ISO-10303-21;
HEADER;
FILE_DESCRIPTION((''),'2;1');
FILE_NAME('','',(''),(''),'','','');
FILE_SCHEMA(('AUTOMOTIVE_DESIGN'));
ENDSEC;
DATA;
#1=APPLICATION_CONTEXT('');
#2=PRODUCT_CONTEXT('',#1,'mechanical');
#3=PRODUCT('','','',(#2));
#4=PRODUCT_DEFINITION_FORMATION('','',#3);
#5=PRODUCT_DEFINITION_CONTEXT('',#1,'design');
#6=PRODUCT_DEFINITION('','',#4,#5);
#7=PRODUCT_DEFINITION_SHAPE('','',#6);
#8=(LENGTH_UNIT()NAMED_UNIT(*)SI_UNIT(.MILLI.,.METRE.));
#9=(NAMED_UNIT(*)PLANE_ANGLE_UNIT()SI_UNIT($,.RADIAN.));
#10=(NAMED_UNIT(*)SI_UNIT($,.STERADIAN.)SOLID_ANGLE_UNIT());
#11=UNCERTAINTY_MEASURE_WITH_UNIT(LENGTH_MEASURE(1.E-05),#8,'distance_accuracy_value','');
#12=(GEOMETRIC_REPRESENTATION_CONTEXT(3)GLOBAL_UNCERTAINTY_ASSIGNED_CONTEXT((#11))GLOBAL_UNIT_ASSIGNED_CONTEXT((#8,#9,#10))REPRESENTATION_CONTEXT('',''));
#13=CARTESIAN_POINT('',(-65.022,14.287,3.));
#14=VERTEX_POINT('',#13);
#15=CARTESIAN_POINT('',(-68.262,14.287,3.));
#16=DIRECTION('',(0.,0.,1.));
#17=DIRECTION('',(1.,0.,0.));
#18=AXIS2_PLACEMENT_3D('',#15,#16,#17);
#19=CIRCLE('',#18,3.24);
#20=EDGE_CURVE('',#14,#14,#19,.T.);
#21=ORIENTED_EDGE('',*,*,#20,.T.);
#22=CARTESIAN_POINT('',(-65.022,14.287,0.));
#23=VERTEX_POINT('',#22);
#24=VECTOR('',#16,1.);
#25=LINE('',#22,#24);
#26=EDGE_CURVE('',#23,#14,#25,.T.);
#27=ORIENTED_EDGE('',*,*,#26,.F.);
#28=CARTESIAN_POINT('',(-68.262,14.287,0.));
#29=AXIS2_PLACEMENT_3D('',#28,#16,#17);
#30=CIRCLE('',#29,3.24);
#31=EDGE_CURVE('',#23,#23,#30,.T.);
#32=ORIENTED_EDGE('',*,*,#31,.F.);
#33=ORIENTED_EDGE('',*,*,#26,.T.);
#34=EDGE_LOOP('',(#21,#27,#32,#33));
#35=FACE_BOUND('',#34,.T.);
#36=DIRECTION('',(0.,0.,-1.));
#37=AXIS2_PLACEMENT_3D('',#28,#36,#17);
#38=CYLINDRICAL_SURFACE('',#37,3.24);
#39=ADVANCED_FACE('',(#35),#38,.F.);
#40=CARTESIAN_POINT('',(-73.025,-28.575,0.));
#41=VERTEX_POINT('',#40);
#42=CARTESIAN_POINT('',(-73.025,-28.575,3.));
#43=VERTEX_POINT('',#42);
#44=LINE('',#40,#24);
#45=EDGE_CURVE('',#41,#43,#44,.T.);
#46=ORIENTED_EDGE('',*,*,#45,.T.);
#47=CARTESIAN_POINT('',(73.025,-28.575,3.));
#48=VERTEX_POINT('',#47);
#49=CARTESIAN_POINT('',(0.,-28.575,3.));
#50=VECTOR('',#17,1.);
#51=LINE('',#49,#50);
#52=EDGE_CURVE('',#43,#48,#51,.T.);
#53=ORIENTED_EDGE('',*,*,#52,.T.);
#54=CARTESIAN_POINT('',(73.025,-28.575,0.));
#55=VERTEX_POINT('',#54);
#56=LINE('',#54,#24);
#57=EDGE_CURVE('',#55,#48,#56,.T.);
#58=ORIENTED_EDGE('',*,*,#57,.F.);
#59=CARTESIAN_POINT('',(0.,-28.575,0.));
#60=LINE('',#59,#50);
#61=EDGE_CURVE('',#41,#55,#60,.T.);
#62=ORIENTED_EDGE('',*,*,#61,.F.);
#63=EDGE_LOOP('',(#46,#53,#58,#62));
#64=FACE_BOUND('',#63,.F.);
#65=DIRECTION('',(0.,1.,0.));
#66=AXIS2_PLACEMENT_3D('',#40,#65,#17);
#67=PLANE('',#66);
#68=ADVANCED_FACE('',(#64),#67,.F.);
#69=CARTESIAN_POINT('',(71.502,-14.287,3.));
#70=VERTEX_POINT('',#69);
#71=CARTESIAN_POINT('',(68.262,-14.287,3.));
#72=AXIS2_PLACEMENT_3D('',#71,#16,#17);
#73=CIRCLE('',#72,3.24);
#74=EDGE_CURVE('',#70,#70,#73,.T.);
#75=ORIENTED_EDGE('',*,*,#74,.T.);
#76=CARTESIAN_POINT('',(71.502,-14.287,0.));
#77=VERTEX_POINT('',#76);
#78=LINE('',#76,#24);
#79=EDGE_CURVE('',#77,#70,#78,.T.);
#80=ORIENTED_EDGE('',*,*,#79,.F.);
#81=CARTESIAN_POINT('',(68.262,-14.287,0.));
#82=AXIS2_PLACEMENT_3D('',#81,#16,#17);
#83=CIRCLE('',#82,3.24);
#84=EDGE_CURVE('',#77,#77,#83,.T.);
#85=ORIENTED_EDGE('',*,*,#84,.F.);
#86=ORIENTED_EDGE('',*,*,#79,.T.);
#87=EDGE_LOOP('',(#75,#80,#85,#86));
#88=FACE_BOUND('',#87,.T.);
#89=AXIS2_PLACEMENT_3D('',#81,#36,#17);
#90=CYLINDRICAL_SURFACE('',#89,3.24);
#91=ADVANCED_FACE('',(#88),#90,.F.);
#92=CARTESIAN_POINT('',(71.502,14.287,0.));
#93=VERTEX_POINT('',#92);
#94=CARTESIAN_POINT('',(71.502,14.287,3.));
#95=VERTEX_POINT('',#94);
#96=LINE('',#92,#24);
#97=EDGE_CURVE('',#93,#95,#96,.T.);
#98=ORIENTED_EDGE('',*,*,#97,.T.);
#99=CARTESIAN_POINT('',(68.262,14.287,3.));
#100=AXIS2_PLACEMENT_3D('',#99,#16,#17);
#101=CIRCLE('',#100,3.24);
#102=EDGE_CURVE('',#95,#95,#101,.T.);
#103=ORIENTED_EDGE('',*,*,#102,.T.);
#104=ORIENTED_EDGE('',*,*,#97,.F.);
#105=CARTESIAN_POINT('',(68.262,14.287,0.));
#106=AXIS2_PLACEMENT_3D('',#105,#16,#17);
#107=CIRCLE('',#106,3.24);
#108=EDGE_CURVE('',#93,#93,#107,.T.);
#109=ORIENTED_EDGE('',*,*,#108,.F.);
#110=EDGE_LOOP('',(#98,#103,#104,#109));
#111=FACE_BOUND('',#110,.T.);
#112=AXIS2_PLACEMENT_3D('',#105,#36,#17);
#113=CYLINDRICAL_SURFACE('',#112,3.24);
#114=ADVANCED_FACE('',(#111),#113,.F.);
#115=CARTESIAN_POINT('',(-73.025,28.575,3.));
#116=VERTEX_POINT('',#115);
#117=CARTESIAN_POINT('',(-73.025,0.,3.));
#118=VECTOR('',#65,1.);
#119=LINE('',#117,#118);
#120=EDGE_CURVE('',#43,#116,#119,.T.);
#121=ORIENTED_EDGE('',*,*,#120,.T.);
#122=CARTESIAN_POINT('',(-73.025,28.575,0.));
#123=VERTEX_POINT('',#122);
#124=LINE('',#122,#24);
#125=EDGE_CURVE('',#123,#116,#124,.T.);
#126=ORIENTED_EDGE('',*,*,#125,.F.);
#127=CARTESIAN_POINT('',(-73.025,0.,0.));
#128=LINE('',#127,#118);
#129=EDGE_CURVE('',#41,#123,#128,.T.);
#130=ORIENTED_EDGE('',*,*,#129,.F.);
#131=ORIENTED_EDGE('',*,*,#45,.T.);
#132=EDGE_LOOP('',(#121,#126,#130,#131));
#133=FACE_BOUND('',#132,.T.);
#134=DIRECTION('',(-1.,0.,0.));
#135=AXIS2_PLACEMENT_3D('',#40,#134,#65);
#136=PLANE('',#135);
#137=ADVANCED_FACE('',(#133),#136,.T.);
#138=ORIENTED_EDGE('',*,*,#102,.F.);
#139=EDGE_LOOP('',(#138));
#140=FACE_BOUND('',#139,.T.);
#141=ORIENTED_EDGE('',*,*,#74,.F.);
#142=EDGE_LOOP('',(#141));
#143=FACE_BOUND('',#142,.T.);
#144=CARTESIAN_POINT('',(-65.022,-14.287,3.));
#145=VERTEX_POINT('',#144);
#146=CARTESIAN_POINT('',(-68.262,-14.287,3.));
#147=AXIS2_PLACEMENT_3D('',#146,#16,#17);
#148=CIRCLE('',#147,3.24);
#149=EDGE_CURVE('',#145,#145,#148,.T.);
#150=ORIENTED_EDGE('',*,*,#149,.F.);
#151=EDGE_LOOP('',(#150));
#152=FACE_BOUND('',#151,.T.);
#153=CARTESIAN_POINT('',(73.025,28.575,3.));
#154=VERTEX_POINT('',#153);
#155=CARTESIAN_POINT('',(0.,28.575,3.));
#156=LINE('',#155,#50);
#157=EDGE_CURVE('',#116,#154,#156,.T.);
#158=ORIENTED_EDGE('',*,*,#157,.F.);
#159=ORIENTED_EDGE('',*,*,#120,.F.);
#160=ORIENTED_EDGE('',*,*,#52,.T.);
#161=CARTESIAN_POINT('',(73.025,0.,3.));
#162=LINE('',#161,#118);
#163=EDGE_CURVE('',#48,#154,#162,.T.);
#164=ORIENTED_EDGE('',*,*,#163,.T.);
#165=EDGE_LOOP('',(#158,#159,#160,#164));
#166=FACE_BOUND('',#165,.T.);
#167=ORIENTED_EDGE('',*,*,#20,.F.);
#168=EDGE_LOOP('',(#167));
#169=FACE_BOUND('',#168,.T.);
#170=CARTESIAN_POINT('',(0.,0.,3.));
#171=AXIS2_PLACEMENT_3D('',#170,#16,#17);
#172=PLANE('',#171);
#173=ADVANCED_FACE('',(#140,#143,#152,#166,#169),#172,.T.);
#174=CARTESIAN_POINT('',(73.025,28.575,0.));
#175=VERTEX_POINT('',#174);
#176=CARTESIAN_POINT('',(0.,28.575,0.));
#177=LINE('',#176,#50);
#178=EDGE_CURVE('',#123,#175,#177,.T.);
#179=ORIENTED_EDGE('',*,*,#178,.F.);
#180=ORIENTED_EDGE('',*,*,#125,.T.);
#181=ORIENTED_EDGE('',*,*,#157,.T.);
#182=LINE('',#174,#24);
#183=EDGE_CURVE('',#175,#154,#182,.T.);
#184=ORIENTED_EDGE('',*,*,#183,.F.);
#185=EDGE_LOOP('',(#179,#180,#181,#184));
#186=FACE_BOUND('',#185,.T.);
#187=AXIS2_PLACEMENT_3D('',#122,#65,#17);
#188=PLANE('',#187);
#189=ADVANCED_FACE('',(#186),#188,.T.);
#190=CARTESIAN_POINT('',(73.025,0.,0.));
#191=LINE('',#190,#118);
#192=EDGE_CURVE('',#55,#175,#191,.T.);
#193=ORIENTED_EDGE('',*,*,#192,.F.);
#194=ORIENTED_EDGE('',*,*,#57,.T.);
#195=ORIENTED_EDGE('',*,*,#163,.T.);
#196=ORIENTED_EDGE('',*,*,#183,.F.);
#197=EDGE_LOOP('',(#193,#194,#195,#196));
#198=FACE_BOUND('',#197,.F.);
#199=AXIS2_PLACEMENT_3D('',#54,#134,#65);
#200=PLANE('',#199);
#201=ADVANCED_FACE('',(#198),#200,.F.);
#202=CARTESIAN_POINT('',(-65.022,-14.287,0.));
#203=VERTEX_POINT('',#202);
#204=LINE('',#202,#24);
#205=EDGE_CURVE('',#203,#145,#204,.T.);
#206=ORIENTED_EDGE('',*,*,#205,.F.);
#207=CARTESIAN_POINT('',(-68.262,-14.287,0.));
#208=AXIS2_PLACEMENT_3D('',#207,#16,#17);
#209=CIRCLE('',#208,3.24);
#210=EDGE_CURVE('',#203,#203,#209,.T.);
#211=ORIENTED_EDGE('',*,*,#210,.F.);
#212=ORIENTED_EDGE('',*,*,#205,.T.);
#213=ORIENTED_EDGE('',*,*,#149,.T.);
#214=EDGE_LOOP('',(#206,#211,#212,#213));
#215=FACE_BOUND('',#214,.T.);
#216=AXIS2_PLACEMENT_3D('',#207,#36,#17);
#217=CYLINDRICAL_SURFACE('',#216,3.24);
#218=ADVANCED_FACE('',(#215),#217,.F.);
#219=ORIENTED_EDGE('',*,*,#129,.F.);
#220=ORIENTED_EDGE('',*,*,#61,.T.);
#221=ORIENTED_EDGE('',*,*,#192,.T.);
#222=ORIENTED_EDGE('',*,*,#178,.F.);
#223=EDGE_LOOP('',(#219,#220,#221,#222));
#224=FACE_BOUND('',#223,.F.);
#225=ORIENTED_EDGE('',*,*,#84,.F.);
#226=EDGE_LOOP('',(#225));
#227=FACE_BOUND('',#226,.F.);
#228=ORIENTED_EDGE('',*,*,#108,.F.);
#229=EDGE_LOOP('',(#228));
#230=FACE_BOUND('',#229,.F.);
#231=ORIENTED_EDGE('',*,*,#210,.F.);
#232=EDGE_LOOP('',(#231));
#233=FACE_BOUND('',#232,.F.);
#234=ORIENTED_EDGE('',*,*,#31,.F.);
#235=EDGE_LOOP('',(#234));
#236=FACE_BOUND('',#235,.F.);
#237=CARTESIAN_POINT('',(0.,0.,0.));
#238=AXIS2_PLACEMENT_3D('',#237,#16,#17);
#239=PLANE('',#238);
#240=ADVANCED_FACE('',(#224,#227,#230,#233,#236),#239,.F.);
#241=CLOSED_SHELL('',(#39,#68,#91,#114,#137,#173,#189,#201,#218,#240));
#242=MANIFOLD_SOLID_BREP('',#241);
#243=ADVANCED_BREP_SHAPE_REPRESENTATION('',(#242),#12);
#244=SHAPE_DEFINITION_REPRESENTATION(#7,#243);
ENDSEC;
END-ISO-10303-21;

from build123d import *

# Parameters (mm, degrees)
F0_W     = 146.05
F0_H     = 57.15
F0_R     = 3.24
F1_DEPTH = 3


# Not quite as in the source:
# - ends of sketch curves that miss each other by under 0.0002 mm in the source are joined


with BuildPart() as f1:
    # F0 (on Top) → F1 (new body)
    with BuildSketch(Plane.XY):
        Rectangle(F0_W, F0_H)
        with Locations((-68.262, -14.287)):
            Circle(F0_R, mode=Mode.SUBTRACT)
        with Locations((68.262, -14.287)):
            Circle(F0_R, mode=Mode.SUBTRACT)
        with Locations((-68.262, 14.287)):
            Circle(F0_R, mode=Mode.SUBTRACT)
        with BuildLine():
            ThreePointArc((-68.262, 7.937), (-61.912, 14.287), (-68.262, 20.637))
            Line((-68.262, 20.637), (-72.225, 20.637))
            Line((-72.225, 20.637), (-72.225, 27.775))
            Line((-72.225, 27.775), (72.225, 27.775))
            Line((72.225, 27.775), (72.225, 20.636958))
            Line((72.225, 20.636958), (69.238962, 20.636958))
            ThreePointArc((69.238962, 20.636958), (62.9120417914, 14.2639619992), (69.2850380008, 7.9370417914))
            Line((69.2850380008, 7.9370417914), (72.225, 7.937042))
            Line((72.225, 7.937042), (72.225, -7.937576))
            Line((72.225, -7.937576), (68.176478, -7.937576))
            ThreePointArc((68.176478, -7.937576), (61.9125759326, -14.3725220009), (68.3475220009, -20.6364240674))
            Line((68.3475220009, -20.6364240674), (72.225, -20.636424))
            Line((72.225, -20.636424), (72.225, -27.775))
            Line((72.225, -27.775), (-72.225, -27.775))
            Line((-72.225, -27.775), (-72.225, -20.636871))
            Line((-72.225, -20.636871), (-69.221508, -20.636871))
            ThreePointArc((-69.221508, -20.636871), (-62.9121291038, -14.2465080007), (-69.3024919993, -7.9371291038))
            Line((-69.3024919993, -7.9371291038), (-72.225, -7.937129))
            Line((-72.225, -7.937129), (-72.225, 7.937))
            Line((-72.225, 7.937), (-68.262, 7.937))
        make_face(mode=Mode.SUBTRACT)
        with Locations((68.262, 14.287)):
            Circle(F0_R, mode=Mode.SUBTRACT)
        with BuildLine():
            Line((-72.225, 20.637), (-68.262, 20.637))
            ThreePointArc((-68.262, 20.637), (-61.912, 14.287), (-68.262, 7.937))
            Line((-68.262, 7.937), (-72.225, 7.937))
            Line((-72.225, 7.937), (-72.225, -7.937129))
            Line((-72.225, -7.937129), (-69.302492, -7.937129))
            ThreePointArc((-69.302492, -7.937129), (-62.9121291038, -14.2465080007), (-69.2215080007, -20.6368708962))
            Line((-69.2215080007, -20.6368708962), (-72.225, -20.636871))
            Line((-72.225, -20.636871), (-72.225, -27.775))
            Line((-72.225, -27.775), (72.225, -27.775))
            Line((72.225, -27.775), (72.225, -20.636424))
            Line((72.225, -20.636424), (68.347522, -20.636424))
            ThreePointArc((68.347522, -20.636424), (61.9125759326, -14.3725220009), (68.1764779991, -7.9375759326))
            Line((68.1764779991, -7.9375759326), (72.225, -7.937576))
            Line((72.225, -7.937576), (72.225, 7.937042))
            Line((72.225, 7.937042), (69.285038, 7.937042))
            ThreePointArc((69.285038, 7.937042), (62.9120417914, 14.2639619992), (69.2389619992, 20.6369582086))
            Line((69.2389619992, 20.6369582086), (72.225, 20.636958))
            Line((72.225, 20.636958), (72.225, 27.775))
            Line((72.225, 27.775), (-72.225, 27.775))
            Line((-72.225, 27.775), (-72.225, 20.637))
        make_face()
    extrude(amount=F1_DEPTH)


solid = f1.part
